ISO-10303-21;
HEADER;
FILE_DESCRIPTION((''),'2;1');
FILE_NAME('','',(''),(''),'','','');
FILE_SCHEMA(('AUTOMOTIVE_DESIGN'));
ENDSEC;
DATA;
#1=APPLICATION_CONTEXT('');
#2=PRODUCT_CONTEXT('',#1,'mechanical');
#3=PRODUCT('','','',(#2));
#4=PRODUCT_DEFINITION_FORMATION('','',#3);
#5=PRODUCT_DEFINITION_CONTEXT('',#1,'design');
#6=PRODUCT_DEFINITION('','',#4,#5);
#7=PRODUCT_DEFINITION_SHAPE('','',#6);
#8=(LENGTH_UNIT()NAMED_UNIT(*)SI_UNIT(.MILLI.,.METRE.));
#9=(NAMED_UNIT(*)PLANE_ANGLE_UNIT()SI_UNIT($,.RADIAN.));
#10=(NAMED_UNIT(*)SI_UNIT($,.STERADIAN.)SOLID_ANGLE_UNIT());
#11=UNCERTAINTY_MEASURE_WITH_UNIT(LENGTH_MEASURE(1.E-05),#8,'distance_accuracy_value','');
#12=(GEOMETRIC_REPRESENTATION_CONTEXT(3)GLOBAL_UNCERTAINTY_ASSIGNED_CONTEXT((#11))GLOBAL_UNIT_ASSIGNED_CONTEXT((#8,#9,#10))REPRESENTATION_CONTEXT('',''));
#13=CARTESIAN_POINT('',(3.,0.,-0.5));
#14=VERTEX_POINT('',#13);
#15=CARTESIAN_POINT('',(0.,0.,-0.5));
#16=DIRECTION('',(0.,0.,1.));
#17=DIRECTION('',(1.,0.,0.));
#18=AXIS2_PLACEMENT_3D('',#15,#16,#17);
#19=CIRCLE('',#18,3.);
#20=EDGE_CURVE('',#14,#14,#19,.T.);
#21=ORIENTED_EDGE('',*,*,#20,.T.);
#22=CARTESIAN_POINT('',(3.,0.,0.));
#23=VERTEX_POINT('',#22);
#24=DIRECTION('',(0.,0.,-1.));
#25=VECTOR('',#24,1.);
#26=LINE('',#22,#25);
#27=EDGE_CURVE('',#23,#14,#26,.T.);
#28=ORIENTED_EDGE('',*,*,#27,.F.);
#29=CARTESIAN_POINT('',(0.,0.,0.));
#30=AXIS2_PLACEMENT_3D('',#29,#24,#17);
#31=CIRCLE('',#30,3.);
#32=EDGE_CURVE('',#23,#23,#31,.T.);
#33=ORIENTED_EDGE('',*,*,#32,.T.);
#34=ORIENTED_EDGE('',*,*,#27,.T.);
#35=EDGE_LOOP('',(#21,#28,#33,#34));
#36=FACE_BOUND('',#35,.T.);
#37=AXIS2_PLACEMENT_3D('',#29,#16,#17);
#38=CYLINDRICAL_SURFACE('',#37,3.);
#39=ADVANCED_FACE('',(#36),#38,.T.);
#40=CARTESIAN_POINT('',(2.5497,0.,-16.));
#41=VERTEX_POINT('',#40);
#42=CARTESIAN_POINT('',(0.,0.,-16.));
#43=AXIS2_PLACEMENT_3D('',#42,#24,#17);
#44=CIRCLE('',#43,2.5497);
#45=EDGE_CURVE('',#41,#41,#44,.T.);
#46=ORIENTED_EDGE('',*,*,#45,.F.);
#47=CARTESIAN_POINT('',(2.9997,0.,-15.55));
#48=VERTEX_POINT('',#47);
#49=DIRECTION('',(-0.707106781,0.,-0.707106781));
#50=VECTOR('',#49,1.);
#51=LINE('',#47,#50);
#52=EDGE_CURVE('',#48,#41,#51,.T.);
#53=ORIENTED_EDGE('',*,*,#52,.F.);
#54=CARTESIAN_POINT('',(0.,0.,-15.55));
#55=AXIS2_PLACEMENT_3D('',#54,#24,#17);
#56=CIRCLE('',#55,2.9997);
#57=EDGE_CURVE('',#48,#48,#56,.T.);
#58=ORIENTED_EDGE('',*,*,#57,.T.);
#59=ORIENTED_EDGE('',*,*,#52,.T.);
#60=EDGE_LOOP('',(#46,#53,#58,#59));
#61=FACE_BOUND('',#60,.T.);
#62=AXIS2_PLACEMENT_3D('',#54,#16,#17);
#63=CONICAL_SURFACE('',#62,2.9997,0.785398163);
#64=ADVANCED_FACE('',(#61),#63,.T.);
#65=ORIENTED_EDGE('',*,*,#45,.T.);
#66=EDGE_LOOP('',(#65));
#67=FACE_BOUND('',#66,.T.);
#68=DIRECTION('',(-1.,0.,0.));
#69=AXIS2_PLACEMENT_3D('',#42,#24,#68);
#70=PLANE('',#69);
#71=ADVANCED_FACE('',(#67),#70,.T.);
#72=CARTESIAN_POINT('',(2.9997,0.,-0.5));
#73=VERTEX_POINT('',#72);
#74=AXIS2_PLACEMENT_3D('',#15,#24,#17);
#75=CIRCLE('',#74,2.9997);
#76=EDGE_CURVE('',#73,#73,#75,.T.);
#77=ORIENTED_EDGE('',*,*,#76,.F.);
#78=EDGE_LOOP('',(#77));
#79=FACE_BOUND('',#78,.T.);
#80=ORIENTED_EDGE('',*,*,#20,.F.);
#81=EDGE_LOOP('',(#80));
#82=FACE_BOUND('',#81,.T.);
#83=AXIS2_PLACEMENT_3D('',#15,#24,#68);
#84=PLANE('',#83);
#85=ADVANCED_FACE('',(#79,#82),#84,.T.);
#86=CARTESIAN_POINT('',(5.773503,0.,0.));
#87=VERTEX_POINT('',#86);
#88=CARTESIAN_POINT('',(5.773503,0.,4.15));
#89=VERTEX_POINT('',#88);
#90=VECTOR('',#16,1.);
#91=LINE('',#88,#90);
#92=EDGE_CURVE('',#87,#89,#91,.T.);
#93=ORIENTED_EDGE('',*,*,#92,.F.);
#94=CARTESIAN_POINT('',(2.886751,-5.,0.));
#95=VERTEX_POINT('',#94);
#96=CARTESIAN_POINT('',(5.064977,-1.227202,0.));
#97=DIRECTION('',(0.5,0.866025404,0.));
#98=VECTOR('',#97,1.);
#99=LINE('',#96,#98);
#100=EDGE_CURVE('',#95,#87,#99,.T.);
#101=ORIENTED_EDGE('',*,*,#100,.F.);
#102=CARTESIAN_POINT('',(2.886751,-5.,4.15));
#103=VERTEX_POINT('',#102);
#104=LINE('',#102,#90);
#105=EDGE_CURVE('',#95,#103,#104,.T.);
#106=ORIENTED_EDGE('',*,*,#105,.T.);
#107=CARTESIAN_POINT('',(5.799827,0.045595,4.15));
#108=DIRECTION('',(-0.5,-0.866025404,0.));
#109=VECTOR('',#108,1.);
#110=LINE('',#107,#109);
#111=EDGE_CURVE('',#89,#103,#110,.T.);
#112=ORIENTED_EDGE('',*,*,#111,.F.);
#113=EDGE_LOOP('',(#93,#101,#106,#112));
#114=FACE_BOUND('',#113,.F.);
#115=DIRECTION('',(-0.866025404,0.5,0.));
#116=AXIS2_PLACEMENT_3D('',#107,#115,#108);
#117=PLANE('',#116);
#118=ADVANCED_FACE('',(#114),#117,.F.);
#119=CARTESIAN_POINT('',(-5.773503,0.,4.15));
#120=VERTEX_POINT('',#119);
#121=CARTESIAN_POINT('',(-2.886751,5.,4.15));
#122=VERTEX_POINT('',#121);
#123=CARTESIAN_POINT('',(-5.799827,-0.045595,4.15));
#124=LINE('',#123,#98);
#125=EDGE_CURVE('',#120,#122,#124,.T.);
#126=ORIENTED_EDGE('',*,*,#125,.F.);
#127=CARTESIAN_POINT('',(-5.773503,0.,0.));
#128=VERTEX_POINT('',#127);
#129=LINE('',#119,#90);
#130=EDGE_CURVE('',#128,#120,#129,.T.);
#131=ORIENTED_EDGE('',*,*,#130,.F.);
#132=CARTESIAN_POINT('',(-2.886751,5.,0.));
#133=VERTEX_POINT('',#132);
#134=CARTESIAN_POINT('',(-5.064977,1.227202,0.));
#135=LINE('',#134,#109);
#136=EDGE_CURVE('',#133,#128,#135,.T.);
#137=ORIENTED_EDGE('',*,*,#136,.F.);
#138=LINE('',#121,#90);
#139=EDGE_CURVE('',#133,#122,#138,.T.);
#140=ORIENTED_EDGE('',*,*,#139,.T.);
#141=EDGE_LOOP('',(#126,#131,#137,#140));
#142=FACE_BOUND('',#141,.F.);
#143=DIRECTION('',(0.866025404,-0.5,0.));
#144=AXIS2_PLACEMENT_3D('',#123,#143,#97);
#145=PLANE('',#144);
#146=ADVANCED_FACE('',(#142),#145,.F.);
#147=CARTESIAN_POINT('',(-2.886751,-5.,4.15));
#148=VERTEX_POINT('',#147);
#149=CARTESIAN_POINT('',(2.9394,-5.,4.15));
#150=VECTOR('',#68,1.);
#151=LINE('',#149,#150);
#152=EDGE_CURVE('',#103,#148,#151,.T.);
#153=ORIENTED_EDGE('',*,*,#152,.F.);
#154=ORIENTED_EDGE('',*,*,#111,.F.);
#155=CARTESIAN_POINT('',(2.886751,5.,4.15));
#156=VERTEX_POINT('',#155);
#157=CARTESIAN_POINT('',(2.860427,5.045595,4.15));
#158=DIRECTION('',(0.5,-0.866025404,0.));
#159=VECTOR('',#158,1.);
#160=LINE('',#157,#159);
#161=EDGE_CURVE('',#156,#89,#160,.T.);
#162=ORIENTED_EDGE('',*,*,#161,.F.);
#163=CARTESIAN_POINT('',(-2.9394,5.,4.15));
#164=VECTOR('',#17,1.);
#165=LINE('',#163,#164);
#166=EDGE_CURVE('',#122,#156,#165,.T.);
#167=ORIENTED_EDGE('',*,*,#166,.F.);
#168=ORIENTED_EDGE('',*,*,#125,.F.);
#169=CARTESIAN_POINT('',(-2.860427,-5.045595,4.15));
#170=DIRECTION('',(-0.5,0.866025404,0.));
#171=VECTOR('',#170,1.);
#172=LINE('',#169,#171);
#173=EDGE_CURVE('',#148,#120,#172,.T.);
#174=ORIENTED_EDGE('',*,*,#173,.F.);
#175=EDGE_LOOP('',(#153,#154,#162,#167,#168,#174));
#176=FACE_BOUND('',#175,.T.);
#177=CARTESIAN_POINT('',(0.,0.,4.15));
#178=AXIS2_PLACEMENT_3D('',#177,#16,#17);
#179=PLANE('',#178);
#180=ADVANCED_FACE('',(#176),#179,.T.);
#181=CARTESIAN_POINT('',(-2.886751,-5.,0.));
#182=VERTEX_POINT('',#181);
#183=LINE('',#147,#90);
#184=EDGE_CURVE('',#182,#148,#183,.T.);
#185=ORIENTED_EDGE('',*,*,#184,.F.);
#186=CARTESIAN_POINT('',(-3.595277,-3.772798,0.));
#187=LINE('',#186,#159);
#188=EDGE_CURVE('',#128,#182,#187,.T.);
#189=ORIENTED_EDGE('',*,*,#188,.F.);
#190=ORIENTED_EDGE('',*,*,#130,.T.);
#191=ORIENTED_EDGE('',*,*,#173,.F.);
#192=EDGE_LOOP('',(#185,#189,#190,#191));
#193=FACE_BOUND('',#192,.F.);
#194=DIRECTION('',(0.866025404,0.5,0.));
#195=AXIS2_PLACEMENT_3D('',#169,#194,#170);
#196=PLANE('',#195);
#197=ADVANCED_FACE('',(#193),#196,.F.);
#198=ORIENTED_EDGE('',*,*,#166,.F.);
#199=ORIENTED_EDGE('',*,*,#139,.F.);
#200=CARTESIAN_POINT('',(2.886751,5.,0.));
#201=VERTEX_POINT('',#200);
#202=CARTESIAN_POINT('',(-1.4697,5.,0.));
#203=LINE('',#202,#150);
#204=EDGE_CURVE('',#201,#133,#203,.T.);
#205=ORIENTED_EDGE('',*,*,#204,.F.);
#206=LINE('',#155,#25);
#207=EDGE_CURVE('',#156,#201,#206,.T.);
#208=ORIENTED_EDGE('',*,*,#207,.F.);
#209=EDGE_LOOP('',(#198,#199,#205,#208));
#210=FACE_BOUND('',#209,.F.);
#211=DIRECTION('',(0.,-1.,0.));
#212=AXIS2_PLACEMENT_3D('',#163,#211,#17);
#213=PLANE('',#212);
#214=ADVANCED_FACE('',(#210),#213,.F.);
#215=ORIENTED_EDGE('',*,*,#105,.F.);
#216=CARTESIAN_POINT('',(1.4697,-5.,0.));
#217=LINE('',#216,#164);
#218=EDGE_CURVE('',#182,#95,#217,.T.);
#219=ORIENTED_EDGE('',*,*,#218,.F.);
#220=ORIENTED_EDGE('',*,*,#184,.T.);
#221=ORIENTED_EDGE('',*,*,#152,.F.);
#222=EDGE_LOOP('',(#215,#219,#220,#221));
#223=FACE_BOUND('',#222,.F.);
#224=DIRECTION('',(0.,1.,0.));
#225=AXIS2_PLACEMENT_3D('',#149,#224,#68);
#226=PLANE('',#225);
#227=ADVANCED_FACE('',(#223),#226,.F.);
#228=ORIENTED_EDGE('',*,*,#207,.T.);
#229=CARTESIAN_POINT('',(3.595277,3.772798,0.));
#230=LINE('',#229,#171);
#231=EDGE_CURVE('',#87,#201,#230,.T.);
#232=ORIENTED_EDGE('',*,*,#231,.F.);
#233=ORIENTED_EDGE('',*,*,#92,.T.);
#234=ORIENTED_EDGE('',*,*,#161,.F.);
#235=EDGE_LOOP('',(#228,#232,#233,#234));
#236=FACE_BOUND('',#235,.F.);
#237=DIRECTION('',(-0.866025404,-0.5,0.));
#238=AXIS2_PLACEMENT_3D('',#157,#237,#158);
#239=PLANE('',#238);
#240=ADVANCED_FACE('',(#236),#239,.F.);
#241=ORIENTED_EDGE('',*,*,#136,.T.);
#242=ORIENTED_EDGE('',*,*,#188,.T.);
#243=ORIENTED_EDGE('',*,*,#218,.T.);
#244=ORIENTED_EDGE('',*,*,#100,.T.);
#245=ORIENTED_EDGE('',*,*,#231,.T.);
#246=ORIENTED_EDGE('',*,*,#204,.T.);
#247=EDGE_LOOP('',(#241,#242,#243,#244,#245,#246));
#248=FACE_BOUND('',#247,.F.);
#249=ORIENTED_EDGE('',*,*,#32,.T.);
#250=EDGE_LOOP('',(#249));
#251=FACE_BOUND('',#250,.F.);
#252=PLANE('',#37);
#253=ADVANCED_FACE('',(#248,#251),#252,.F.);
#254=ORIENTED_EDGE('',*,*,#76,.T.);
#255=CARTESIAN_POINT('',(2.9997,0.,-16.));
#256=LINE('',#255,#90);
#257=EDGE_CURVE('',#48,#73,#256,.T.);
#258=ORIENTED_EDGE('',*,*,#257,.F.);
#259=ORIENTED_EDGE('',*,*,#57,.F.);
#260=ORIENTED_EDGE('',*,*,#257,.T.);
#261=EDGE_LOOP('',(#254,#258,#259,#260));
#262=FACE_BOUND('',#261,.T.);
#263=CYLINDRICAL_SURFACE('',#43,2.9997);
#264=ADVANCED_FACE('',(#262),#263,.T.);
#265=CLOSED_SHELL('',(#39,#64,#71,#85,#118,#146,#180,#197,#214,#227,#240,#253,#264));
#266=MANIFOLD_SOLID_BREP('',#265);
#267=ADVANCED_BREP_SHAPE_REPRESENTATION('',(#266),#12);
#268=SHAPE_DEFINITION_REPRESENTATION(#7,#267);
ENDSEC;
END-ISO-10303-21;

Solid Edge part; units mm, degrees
sketch "Sketch1" plane through (0, 0, 0) normal (0, 0, 1) x (1, 0, 0)
  circle A0 centre (0, 0) radius 5.8
  dimension "D1" = 11.6
extrude "Protrusion1" add sketch "Sketch1" along normal blind 4.15
sketch "Sketch2" plane through (0, 0, 0) normal (0, 0, -1) x (1, 0, 0)
  circle A0 centre (0, 0) radius 3
extrude "Protrusion2" add sketch "Sketch2" along normal blind 16
sketch "Sketch3" plane through (0, 0, -16) normal (0, 0, -1) x (1, 0, 0)
  circle A0 centre (0, 0) radius 2.9997
extrude "Cutout1" cut sketch "Sketch3" against normal blind 15.5 flip side to cut
chamfer "Chamfer_1" distance 0.45 angle 45 1 edges at (-2.9997, 0, -16)
sketch "Sketch4" plane through (0, 0, 4.15) normal (0, 0, 1) x (1, 0, 0)
  line L0 (-2.9394, 5) -> (2.9394, 5)
  dimension "D1" = 10
extrude "Cutout2" cut sketch "Sketch4" against normal up to next material side at (0, 5.05, 4.15)
pattern_circular "Pattern1" count 6 over 360 about axis through (0, 0, 4.15) along (0, 0, 1) of "Cutout2"
properties part number "24101193"
